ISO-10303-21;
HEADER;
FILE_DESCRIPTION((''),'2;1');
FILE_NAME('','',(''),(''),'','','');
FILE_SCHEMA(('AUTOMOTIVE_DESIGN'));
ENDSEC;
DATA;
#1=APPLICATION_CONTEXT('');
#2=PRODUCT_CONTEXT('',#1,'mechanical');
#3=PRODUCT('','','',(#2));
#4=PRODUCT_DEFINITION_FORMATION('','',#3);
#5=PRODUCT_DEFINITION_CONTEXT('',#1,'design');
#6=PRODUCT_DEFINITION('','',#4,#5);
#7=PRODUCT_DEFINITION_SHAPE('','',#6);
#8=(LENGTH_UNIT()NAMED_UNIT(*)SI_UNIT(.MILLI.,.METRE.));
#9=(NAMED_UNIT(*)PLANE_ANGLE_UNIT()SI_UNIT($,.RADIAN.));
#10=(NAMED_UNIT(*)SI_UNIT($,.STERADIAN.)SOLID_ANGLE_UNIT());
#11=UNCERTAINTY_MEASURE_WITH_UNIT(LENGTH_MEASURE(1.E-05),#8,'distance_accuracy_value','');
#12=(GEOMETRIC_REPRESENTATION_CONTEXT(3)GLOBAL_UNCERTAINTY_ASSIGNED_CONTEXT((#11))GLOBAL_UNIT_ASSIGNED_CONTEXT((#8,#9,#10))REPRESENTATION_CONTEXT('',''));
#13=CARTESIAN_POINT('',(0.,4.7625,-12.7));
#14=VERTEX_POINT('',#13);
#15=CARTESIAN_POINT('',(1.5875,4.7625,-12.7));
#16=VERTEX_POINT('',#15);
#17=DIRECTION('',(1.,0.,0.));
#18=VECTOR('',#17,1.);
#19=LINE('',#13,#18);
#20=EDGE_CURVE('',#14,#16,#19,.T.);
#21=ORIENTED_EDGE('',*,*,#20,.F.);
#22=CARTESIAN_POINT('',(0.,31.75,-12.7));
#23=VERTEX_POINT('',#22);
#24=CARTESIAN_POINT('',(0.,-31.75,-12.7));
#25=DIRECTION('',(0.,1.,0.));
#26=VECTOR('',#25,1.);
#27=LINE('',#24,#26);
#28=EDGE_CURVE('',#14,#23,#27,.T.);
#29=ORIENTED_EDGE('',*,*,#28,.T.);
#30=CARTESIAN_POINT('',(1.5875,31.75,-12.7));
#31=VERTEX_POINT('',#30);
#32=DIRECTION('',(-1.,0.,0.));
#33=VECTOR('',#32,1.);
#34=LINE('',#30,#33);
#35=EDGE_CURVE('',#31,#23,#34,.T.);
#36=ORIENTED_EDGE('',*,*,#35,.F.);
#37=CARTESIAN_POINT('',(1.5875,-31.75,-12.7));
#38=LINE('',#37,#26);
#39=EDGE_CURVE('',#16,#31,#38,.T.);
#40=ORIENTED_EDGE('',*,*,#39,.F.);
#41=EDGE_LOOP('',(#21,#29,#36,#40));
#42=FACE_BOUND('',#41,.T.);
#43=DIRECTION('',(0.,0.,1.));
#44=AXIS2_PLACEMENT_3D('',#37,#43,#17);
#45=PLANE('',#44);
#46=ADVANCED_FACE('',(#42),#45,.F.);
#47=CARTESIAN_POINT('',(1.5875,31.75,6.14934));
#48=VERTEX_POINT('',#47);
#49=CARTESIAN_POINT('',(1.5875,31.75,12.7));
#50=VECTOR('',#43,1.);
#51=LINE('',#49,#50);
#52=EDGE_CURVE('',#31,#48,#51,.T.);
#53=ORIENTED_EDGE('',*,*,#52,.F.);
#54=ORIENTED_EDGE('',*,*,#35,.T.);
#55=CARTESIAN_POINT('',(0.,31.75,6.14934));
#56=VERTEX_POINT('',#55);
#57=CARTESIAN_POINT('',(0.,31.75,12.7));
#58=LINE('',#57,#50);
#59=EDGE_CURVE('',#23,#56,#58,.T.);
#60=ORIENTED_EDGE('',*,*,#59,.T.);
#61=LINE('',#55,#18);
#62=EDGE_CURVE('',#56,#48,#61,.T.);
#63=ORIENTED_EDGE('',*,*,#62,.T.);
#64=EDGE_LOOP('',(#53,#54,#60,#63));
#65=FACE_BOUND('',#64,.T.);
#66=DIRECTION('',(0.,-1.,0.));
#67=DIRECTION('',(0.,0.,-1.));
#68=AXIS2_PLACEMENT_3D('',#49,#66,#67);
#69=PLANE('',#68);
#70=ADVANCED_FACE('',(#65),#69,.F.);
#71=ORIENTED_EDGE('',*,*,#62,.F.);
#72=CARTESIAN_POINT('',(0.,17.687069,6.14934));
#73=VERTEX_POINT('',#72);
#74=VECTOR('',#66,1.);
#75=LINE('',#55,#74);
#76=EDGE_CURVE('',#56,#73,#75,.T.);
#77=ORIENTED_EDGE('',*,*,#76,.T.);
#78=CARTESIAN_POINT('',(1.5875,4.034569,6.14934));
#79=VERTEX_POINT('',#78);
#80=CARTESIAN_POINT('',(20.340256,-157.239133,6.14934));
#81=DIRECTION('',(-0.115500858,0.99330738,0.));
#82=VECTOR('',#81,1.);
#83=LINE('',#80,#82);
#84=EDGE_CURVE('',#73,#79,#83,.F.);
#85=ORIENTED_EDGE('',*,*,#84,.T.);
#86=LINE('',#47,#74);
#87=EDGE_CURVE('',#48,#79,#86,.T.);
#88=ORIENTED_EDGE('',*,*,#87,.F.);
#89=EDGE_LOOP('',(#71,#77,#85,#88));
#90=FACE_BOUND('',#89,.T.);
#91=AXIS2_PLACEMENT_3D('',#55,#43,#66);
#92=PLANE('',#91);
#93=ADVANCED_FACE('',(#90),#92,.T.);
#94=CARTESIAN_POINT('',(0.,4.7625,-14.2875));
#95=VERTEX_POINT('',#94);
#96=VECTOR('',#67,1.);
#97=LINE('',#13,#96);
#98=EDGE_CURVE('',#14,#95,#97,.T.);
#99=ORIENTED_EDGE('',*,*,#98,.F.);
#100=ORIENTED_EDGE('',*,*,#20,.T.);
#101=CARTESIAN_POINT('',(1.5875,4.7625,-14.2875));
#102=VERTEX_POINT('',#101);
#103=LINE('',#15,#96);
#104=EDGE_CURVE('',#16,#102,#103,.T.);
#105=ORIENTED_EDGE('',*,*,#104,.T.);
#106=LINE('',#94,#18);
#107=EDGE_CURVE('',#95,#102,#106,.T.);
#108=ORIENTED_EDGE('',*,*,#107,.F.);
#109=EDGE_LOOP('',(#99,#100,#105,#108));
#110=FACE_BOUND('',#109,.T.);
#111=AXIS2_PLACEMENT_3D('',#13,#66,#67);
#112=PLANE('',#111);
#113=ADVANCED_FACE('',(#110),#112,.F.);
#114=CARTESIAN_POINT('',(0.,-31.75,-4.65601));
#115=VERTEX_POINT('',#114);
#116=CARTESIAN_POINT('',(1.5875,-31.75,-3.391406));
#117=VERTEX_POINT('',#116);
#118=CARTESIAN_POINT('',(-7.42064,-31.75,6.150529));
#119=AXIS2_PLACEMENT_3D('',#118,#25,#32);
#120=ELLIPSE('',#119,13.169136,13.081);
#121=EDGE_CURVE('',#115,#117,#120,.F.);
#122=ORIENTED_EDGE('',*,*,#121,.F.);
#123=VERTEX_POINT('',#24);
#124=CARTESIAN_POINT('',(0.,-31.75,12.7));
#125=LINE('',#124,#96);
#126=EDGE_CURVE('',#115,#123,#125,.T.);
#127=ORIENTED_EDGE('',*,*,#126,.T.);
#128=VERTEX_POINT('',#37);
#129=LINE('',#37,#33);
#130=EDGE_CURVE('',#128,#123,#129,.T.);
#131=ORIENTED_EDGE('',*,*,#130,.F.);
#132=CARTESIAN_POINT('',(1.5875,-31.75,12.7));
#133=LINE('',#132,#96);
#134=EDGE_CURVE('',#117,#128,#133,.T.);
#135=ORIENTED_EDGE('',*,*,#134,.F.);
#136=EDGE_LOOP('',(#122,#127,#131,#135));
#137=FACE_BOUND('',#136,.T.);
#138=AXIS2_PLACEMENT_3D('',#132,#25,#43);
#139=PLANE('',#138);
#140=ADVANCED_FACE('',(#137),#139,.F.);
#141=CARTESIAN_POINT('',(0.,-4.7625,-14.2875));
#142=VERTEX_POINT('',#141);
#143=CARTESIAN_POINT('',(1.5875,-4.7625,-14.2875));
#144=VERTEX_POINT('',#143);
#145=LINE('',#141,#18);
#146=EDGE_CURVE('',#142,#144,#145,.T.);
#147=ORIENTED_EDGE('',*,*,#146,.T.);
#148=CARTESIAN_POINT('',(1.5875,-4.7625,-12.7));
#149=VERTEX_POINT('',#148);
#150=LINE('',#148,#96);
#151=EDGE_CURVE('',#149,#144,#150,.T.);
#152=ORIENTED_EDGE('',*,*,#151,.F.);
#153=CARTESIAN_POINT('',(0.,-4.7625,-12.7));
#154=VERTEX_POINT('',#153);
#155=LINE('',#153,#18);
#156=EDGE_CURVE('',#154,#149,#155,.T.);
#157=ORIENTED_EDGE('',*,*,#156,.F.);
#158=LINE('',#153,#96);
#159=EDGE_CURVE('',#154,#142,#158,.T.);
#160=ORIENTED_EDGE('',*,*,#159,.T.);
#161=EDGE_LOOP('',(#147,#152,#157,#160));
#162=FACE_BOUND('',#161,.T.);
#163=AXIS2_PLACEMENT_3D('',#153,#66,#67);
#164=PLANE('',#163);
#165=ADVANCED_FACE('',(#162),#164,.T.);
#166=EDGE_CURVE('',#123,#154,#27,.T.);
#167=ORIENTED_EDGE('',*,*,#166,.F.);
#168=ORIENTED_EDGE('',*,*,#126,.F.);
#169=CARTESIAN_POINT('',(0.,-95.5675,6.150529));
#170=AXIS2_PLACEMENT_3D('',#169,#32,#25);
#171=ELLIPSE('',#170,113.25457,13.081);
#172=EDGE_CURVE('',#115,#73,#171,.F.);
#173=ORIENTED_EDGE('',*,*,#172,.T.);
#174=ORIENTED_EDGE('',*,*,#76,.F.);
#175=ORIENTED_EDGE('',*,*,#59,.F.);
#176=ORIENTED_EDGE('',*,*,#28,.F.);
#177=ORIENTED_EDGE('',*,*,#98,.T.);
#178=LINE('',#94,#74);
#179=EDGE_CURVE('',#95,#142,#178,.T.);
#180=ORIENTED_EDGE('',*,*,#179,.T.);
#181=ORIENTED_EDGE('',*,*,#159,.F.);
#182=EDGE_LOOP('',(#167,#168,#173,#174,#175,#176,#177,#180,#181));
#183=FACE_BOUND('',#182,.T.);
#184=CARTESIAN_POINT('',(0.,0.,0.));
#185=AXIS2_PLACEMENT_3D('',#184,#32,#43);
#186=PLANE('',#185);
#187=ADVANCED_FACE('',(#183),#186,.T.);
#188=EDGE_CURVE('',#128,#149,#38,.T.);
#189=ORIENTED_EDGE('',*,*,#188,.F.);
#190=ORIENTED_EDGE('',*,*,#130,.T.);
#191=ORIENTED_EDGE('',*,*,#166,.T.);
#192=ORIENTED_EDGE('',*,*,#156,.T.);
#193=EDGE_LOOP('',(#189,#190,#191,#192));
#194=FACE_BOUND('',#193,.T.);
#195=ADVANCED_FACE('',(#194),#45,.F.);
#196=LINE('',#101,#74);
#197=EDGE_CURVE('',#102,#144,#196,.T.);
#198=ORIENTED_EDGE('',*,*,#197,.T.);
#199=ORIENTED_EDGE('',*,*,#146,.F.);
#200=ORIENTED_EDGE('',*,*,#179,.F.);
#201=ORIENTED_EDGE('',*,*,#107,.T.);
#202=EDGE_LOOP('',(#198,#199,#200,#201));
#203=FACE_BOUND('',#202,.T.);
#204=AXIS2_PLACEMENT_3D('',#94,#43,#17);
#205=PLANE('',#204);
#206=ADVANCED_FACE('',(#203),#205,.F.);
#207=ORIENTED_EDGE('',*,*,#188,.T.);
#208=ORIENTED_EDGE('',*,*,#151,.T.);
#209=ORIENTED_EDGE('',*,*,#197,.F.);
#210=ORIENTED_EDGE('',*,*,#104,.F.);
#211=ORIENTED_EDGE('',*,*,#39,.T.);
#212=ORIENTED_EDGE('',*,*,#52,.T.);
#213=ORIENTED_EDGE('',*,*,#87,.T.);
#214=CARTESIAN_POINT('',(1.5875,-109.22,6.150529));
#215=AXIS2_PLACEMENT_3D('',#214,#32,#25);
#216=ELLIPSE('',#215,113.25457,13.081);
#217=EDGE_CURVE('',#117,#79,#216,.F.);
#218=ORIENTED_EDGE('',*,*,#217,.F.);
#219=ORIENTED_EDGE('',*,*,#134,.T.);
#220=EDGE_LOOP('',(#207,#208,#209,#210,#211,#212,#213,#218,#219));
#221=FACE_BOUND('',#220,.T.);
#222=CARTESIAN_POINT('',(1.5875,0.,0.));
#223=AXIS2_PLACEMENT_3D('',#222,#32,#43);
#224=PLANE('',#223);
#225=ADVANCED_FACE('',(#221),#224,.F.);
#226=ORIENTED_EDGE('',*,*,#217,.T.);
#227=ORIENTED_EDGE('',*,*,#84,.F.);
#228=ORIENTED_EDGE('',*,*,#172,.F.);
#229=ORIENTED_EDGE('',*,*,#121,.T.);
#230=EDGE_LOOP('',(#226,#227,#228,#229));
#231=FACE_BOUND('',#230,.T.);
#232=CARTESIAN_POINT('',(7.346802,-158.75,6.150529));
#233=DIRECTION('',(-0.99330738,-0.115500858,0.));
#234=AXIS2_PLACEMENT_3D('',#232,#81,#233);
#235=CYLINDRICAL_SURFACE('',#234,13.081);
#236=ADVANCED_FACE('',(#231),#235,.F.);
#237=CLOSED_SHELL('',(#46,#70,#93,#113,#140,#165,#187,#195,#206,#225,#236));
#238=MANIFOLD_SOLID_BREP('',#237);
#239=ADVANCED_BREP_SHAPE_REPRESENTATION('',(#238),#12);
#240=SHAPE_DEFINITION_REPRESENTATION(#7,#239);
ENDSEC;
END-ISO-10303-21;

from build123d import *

# Parameters (mm, degrees)
SKETCH2_W           = 25.4
SKETCH2_H           = 63.5
BOSS_EXTRUDE1_DEPTH = 1.5875
SKETCH3_W           = 1.5875
SKETCH3_H           = 9.525
BOSS_EXTRUDE2_DEPTH = 1.5875
SKETCH3_4_W         = 1.5875
SKETCH3_4_H         = 9.525
CUT_EXTRUDE1_DEPTH  = 3.175
CUT_EXTRUDE2_DEPTH  = 35.85276621
CAVITY1_OUTLINE_W   = 13.081
CAVITY1_OUTLINE_H   = 49.289563405


# Read off the part's stored shape, not the designer's step: Cavity1
with BuildPart() as part:
    # Sketch2 → Boss-Extrude1 (new body)
    with BuildSketch(Plane(origin=(0, 0, 0), x_dir=(0, 0, -1), z_dir=(1, 0, 0))):
        Rectangle(SKETCH2_W, SKETCH2_H)
    extrude(amount=BOSS_EXTRUDE1_DEPTH)

    # Sketch3 → Boss-Extrude2 (add)
    with BuildSketch(Plane(origin=(1.5875, 0, 0), x_dir=(0, 0, -1), z_dir=(1, 0, 0))):
        with Locations((13.49375, 0)):
            Rectangle(SKETCH3_W, SKETCH3_H)
    extrude(amount=-BOSS_EXTRUDE2_DEPTH)

    # Sketch3<4> → Cut-Extrude1 (cut)
    with BuildSketch(Plane(origin=(1.5875, 0, 0), x_dir=(0, 0, -1), z_dir=(1, 0, 0))):
        with Locations((-11.90625, 0)):
            Rectangle(SKETCH3_4_W, SKETCH3_4_H)
    extrude(amount=-CUT_EXTRUDE1_DEPTH, mode=Mode.SUBTRACT)

    # Sketch4 → Cut-Extrude2 (cut, through all)
    with BuildSketch(Plane(origin=(1.5875, 0, 0), x_dir=(0, 0, -1), z_dir=(1, 0, 0))):
        Polygon((-6.14934, 31.75), (-6.14934, -31.75), (-12.7, -31.75), (-12.7, -4.7625), (-11.1125, -4.7625), (-11.1125, 4.7625), (-12.7, 4.7625), (-12.7, 31.75), align=None)
    extrude(amount=-CUT_EXTRUDE2_DEPTH, mode=Mode.SUBTRACT)

    # Cavity1 outline → Cavity1 (revolve, cut)
    with BuildSketch(Plane(origin=(-10.964254269, -1.274913287, 6.150528853), x_dir=(0.9933073803012532, 0.11550085817456804, 0), z_dir=(0, 0, -1))):
        with Locations((6.5405, 7.076085234)):
            Rectangle(CAVITY1_OUTLINE_W, CAVITY1_OUTLINE_H)
    revolve(axis=Axis((-10.964254269, -1.274913287, 6.150528853), (0.11550085817456807, -0.9933073803012534, 0)), mode=Mode.SUBTRACT)


solid = part.part
